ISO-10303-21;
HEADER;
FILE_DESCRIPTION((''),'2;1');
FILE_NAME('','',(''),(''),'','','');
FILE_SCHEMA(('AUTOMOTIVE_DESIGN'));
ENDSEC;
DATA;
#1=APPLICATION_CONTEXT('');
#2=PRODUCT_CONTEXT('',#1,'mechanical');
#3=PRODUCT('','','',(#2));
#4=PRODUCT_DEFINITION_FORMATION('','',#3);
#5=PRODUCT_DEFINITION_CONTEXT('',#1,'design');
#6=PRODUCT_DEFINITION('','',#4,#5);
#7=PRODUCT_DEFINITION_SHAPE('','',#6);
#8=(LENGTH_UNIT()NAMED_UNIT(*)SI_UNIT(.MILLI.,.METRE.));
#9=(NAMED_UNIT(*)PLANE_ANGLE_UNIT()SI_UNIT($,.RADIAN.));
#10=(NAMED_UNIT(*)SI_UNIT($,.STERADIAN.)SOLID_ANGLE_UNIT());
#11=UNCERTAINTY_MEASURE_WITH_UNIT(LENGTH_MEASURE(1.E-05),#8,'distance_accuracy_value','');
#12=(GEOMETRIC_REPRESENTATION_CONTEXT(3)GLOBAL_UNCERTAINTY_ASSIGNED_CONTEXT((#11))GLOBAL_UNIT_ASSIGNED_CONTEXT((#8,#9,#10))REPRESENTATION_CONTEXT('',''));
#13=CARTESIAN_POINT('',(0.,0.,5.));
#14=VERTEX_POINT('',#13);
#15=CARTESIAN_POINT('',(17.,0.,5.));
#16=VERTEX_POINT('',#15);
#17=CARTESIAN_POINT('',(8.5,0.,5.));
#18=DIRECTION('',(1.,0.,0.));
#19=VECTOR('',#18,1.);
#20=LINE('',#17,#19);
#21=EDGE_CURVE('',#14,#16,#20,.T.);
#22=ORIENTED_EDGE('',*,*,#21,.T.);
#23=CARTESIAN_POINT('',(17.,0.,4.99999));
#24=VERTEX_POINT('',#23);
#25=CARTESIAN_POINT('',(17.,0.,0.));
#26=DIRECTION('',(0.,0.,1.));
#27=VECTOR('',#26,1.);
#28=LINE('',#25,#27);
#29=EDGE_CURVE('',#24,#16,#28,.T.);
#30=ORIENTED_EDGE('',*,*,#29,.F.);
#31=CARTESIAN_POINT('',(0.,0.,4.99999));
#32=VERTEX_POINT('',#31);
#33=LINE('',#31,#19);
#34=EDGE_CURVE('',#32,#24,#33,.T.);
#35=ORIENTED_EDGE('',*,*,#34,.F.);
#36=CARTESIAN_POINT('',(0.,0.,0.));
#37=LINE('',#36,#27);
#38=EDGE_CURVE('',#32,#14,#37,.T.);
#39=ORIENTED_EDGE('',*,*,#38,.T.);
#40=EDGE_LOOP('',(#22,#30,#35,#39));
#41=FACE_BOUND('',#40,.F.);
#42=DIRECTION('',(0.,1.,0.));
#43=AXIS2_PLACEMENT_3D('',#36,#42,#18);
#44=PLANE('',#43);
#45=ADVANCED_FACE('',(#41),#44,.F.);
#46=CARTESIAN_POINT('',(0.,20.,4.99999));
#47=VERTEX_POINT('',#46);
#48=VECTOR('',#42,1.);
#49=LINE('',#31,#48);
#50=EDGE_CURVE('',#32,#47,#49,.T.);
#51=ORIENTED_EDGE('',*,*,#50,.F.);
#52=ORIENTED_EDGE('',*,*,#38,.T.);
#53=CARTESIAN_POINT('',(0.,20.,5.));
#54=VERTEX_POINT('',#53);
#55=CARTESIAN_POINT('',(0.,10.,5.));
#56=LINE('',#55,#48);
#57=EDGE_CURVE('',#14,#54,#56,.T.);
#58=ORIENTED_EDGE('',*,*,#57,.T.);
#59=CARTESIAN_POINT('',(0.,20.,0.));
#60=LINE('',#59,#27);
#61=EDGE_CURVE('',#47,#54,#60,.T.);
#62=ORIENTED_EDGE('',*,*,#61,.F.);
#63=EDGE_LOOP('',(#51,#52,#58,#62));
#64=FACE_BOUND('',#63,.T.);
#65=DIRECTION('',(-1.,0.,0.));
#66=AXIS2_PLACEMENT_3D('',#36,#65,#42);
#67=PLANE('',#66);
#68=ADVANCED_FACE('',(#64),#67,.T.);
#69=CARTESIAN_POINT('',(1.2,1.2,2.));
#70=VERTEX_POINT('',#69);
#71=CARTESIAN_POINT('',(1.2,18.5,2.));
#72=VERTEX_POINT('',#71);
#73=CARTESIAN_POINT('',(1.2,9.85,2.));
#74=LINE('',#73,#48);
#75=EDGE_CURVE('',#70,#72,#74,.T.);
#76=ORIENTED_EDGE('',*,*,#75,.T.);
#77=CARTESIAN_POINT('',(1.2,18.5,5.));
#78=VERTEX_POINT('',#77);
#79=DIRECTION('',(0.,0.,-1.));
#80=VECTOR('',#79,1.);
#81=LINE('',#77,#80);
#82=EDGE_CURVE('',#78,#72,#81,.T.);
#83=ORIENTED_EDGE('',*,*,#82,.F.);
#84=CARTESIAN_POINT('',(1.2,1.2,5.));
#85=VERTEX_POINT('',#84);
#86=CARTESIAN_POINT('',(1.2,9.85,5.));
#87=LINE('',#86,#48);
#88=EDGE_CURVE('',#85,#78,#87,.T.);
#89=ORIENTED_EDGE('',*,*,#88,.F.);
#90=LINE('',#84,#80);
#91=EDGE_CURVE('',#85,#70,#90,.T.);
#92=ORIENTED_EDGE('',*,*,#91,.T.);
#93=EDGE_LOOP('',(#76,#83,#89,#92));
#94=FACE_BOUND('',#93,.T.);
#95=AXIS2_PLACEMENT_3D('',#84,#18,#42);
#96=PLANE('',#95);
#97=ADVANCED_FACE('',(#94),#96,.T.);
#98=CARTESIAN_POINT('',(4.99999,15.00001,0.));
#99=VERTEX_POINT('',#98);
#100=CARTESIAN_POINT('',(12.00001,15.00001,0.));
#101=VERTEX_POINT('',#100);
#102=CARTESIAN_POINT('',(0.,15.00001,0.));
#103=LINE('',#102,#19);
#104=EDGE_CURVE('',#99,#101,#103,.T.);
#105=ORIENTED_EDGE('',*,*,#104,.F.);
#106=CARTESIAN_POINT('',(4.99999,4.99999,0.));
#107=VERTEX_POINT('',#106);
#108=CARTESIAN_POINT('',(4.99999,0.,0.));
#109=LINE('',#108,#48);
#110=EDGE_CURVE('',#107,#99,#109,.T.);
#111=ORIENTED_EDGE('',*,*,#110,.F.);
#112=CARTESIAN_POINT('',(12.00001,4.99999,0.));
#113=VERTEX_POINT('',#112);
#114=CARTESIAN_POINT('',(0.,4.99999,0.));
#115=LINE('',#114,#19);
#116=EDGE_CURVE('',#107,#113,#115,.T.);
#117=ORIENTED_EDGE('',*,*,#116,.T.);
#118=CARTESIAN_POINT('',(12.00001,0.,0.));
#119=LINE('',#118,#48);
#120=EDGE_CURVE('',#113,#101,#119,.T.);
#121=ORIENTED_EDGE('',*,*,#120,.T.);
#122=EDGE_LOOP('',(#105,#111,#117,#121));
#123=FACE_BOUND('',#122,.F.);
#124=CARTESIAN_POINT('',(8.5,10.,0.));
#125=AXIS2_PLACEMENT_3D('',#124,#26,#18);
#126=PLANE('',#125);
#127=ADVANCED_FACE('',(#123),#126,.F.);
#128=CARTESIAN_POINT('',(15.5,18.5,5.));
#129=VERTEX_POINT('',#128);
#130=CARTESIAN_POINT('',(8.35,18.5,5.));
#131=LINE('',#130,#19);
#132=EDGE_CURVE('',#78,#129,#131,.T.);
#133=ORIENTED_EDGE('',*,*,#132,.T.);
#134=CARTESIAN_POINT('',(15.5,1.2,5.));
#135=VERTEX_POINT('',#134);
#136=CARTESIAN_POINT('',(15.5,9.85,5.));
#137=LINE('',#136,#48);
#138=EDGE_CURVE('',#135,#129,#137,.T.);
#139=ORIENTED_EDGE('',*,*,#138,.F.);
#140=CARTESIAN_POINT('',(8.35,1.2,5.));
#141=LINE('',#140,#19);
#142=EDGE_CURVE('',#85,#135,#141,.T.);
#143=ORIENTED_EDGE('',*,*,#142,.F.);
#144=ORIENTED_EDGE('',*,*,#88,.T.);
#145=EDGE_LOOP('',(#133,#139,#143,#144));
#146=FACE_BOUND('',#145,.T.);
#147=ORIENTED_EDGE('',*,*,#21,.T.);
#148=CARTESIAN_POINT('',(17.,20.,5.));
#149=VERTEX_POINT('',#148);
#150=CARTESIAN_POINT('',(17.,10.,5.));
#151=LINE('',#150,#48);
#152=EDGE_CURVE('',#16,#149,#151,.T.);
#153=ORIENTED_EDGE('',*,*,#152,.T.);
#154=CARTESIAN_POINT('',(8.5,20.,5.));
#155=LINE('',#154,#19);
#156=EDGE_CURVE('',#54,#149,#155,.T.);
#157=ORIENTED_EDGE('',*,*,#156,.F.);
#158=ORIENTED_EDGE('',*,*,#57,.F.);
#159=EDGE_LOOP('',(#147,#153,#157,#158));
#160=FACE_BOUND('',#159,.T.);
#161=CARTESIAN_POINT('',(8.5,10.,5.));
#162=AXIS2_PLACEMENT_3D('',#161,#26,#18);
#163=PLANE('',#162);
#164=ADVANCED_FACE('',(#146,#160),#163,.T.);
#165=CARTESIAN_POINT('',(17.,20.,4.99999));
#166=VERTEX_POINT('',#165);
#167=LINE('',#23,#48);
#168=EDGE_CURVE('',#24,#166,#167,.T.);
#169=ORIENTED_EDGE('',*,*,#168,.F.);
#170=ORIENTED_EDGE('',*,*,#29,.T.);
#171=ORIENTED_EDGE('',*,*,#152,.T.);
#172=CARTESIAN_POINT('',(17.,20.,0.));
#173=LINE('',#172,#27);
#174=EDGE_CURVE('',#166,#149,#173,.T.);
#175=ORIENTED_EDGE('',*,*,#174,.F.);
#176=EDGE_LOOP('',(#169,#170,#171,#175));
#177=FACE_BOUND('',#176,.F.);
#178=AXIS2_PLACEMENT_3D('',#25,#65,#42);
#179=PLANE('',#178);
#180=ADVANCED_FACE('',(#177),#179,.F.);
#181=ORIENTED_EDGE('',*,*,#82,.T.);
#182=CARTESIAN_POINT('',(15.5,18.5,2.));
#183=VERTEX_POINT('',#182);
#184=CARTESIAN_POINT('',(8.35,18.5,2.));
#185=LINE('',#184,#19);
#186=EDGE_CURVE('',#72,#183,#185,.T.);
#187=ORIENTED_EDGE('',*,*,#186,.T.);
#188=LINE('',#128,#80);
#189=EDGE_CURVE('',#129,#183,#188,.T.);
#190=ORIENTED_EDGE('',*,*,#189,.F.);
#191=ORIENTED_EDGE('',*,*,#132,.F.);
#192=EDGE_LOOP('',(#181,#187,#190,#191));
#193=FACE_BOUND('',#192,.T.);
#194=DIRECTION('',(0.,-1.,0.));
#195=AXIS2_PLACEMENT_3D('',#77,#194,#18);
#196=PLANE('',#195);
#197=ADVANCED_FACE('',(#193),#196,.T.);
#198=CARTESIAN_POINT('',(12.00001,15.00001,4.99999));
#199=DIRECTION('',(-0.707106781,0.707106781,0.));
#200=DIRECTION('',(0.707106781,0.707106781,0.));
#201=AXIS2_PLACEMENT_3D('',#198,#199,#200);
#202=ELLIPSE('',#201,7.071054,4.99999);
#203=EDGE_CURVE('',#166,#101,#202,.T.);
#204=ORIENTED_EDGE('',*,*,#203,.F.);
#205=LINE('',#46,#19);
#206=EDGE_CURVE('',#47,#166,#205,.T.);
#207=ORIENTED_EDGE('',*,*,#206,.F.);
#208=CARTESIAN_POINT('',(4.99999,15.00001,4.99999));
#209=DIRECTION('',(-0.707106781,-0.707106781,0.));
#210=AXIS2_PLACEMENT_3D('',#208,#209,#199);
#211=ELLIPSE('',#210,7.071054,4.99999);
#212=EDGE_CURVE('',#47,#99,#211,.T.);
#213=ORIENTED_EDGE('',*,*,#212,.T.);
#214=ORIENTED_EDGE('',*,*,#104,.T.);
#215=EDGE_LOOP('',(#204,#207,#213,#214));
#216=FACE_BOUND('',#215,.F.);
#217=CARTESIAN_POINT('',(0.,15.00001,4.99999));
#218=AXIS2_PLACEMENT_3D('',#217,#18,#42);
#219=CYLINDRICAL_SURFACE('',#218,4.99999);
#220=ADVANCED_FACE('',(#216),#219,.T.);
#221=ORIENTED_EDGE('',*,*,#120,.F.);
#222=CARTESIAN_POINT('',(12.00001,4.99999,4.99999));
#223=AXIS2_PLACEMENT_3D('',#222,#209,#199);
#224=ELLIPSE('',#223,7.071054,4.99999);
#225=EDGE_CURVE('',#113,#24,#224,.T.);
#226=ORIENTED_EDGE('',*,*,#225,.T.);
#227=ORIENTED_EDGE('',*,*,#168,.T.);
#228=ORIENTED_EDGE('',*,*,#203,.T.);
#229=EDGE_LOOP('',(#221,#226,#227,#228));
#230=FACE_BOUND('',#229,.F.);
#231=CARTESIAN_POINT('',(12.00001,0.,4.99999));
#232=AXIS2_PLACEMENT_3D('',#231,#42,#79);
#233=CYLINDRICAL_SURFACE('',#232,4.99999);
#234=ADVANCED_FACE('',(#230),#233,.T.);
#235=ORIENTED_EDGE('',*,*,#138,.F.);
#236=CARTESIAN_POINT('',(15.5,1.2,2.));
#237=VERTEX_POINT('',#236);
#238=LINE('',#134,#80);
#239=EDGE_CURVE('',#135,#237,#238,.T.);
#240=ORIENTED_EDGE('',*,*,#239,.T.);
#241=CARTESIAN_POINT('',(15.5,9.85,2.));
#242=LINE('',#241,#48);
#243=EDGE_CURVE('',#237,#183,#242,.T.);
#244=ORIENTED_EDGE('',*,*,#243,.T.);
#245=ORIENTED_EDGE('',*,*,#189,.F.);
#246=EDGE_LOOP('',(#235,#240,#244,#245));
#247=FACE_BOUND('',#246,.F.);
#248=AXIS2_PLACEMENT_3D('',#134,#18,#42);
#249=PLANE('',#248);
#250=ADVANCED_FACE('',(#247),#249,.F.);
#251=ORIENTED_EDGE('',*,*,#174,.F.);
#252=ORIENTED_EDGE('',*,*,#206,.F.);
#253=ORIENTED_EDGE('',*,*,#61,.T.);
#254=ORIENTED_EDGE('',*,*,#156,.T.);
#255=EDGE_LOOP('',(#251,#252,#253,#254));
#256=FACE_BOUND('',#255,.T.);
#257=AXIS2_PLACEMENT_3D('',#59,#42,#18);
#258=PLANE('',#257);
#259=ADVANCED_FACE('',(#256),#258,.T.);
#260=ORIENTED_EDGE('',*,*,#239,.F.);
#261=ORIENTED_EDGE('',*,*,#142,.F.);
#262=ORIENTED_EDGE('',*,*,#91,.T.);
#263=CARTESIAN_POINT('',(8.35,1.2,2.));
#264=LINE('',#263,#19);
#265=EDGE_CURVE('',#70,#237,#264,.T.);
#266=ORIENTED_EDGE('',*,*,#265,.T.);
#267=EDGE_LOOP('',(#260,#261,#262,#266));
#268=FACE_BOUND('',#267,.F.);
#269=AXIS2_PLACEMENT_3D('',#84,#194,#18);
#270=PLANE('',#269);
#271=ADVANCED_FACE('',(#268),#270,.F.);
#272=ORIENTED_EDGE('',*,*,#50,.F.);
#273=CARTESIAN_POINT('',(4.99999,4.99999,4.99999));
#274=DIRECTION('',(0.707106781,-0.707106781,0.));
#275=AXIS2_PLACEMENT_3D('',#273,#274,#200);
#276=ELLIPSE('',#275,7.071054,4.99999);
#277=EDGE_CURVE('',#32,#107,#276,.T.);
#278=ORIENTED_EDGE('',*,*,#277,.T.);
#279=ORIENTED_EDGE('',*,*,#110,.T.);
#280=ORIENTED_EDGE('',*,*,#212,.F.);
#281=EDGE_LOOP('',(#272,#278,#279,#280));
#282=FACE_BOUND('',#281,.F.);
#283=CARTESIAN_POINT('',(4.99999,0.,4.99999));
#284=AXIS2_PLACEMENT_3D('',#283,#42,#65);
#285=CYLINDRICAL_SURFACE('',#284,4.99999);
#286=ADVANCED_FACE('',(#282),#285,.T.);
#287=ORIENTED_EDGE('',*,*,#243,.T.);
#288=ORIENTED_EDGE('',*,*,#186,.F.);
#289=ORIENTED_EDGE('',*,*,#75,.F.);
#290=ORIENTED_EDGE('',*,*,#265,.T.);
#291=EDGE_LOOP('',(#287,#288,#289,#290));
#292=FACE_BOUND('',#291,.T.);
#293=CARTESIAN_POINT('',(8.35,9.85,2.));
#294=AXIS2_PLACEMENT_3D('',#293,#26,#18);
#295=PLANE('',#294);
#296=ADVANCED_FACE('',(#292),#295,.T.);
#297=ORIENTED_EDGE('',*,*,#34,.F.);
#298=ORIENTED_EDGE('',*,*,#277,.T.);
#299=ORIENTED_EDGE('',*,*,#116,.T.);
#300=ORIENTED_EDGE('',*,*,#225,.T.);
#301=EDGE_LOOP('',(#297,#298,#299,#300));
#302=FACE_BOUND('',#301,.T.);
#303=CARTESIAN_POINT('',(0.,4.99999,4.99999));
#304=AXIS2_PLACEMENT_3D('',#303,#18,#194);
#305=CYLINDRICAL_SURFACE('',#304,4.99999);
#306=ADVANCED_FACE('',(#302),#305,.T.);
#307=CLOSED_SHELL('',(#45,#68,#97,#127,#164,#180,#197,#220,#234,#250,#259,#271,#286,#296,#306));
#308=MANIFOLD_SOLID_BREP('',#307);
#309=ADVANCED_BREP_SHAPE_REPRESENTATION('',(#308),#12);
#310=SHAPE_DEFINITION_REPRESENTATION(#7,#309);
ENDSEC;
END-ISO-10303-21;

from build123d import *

# Parameters (mm, degrees)
F0_W     = 17
F0_H     = 20
F1_DEPTH = 5
F2_W     = 14.3
F2_H     = 17.3
F3_DEPTH = 3
F4_R     = 4.99999


# Not quite as in the source:
# - a fillet or chamfer is up to 0.001 mm smaller than in the source, because OpenCascade refuses the exact size


with BuildPart() as f1:
    # F0 (on Top) → F1 (new body)
    with BuildSketch(Plane.XY):
        with Locations((8.5, 10)):
            Rectangle(F0_W, F0_H)
    extrude(amount=F1_DEPTH)

    # F2 (on face) → F3 (cut)
    with BuildSketch(Plane.XY.offset(5)):
        with Locations((8.35, 9.85)):
            Rectangle(F2_W, F2_H)
    extrude(amount=-F3_DEPTH, mode=Mode.SUBTRACT)

    # F4 (radius 5 in the source; OpenCascade refuses exactly that, so slightly less here)
    f4_edges = [f1.edges().sort_by_distance(p)[0] for p in [
        (0, 10, 0),
        (8.5, 20, 0),
        (17, 10, 0),
        (8.5, 0, 0),
    ]]
    fillet(f4_edges, radius=F4_R)


solid = f1.part
